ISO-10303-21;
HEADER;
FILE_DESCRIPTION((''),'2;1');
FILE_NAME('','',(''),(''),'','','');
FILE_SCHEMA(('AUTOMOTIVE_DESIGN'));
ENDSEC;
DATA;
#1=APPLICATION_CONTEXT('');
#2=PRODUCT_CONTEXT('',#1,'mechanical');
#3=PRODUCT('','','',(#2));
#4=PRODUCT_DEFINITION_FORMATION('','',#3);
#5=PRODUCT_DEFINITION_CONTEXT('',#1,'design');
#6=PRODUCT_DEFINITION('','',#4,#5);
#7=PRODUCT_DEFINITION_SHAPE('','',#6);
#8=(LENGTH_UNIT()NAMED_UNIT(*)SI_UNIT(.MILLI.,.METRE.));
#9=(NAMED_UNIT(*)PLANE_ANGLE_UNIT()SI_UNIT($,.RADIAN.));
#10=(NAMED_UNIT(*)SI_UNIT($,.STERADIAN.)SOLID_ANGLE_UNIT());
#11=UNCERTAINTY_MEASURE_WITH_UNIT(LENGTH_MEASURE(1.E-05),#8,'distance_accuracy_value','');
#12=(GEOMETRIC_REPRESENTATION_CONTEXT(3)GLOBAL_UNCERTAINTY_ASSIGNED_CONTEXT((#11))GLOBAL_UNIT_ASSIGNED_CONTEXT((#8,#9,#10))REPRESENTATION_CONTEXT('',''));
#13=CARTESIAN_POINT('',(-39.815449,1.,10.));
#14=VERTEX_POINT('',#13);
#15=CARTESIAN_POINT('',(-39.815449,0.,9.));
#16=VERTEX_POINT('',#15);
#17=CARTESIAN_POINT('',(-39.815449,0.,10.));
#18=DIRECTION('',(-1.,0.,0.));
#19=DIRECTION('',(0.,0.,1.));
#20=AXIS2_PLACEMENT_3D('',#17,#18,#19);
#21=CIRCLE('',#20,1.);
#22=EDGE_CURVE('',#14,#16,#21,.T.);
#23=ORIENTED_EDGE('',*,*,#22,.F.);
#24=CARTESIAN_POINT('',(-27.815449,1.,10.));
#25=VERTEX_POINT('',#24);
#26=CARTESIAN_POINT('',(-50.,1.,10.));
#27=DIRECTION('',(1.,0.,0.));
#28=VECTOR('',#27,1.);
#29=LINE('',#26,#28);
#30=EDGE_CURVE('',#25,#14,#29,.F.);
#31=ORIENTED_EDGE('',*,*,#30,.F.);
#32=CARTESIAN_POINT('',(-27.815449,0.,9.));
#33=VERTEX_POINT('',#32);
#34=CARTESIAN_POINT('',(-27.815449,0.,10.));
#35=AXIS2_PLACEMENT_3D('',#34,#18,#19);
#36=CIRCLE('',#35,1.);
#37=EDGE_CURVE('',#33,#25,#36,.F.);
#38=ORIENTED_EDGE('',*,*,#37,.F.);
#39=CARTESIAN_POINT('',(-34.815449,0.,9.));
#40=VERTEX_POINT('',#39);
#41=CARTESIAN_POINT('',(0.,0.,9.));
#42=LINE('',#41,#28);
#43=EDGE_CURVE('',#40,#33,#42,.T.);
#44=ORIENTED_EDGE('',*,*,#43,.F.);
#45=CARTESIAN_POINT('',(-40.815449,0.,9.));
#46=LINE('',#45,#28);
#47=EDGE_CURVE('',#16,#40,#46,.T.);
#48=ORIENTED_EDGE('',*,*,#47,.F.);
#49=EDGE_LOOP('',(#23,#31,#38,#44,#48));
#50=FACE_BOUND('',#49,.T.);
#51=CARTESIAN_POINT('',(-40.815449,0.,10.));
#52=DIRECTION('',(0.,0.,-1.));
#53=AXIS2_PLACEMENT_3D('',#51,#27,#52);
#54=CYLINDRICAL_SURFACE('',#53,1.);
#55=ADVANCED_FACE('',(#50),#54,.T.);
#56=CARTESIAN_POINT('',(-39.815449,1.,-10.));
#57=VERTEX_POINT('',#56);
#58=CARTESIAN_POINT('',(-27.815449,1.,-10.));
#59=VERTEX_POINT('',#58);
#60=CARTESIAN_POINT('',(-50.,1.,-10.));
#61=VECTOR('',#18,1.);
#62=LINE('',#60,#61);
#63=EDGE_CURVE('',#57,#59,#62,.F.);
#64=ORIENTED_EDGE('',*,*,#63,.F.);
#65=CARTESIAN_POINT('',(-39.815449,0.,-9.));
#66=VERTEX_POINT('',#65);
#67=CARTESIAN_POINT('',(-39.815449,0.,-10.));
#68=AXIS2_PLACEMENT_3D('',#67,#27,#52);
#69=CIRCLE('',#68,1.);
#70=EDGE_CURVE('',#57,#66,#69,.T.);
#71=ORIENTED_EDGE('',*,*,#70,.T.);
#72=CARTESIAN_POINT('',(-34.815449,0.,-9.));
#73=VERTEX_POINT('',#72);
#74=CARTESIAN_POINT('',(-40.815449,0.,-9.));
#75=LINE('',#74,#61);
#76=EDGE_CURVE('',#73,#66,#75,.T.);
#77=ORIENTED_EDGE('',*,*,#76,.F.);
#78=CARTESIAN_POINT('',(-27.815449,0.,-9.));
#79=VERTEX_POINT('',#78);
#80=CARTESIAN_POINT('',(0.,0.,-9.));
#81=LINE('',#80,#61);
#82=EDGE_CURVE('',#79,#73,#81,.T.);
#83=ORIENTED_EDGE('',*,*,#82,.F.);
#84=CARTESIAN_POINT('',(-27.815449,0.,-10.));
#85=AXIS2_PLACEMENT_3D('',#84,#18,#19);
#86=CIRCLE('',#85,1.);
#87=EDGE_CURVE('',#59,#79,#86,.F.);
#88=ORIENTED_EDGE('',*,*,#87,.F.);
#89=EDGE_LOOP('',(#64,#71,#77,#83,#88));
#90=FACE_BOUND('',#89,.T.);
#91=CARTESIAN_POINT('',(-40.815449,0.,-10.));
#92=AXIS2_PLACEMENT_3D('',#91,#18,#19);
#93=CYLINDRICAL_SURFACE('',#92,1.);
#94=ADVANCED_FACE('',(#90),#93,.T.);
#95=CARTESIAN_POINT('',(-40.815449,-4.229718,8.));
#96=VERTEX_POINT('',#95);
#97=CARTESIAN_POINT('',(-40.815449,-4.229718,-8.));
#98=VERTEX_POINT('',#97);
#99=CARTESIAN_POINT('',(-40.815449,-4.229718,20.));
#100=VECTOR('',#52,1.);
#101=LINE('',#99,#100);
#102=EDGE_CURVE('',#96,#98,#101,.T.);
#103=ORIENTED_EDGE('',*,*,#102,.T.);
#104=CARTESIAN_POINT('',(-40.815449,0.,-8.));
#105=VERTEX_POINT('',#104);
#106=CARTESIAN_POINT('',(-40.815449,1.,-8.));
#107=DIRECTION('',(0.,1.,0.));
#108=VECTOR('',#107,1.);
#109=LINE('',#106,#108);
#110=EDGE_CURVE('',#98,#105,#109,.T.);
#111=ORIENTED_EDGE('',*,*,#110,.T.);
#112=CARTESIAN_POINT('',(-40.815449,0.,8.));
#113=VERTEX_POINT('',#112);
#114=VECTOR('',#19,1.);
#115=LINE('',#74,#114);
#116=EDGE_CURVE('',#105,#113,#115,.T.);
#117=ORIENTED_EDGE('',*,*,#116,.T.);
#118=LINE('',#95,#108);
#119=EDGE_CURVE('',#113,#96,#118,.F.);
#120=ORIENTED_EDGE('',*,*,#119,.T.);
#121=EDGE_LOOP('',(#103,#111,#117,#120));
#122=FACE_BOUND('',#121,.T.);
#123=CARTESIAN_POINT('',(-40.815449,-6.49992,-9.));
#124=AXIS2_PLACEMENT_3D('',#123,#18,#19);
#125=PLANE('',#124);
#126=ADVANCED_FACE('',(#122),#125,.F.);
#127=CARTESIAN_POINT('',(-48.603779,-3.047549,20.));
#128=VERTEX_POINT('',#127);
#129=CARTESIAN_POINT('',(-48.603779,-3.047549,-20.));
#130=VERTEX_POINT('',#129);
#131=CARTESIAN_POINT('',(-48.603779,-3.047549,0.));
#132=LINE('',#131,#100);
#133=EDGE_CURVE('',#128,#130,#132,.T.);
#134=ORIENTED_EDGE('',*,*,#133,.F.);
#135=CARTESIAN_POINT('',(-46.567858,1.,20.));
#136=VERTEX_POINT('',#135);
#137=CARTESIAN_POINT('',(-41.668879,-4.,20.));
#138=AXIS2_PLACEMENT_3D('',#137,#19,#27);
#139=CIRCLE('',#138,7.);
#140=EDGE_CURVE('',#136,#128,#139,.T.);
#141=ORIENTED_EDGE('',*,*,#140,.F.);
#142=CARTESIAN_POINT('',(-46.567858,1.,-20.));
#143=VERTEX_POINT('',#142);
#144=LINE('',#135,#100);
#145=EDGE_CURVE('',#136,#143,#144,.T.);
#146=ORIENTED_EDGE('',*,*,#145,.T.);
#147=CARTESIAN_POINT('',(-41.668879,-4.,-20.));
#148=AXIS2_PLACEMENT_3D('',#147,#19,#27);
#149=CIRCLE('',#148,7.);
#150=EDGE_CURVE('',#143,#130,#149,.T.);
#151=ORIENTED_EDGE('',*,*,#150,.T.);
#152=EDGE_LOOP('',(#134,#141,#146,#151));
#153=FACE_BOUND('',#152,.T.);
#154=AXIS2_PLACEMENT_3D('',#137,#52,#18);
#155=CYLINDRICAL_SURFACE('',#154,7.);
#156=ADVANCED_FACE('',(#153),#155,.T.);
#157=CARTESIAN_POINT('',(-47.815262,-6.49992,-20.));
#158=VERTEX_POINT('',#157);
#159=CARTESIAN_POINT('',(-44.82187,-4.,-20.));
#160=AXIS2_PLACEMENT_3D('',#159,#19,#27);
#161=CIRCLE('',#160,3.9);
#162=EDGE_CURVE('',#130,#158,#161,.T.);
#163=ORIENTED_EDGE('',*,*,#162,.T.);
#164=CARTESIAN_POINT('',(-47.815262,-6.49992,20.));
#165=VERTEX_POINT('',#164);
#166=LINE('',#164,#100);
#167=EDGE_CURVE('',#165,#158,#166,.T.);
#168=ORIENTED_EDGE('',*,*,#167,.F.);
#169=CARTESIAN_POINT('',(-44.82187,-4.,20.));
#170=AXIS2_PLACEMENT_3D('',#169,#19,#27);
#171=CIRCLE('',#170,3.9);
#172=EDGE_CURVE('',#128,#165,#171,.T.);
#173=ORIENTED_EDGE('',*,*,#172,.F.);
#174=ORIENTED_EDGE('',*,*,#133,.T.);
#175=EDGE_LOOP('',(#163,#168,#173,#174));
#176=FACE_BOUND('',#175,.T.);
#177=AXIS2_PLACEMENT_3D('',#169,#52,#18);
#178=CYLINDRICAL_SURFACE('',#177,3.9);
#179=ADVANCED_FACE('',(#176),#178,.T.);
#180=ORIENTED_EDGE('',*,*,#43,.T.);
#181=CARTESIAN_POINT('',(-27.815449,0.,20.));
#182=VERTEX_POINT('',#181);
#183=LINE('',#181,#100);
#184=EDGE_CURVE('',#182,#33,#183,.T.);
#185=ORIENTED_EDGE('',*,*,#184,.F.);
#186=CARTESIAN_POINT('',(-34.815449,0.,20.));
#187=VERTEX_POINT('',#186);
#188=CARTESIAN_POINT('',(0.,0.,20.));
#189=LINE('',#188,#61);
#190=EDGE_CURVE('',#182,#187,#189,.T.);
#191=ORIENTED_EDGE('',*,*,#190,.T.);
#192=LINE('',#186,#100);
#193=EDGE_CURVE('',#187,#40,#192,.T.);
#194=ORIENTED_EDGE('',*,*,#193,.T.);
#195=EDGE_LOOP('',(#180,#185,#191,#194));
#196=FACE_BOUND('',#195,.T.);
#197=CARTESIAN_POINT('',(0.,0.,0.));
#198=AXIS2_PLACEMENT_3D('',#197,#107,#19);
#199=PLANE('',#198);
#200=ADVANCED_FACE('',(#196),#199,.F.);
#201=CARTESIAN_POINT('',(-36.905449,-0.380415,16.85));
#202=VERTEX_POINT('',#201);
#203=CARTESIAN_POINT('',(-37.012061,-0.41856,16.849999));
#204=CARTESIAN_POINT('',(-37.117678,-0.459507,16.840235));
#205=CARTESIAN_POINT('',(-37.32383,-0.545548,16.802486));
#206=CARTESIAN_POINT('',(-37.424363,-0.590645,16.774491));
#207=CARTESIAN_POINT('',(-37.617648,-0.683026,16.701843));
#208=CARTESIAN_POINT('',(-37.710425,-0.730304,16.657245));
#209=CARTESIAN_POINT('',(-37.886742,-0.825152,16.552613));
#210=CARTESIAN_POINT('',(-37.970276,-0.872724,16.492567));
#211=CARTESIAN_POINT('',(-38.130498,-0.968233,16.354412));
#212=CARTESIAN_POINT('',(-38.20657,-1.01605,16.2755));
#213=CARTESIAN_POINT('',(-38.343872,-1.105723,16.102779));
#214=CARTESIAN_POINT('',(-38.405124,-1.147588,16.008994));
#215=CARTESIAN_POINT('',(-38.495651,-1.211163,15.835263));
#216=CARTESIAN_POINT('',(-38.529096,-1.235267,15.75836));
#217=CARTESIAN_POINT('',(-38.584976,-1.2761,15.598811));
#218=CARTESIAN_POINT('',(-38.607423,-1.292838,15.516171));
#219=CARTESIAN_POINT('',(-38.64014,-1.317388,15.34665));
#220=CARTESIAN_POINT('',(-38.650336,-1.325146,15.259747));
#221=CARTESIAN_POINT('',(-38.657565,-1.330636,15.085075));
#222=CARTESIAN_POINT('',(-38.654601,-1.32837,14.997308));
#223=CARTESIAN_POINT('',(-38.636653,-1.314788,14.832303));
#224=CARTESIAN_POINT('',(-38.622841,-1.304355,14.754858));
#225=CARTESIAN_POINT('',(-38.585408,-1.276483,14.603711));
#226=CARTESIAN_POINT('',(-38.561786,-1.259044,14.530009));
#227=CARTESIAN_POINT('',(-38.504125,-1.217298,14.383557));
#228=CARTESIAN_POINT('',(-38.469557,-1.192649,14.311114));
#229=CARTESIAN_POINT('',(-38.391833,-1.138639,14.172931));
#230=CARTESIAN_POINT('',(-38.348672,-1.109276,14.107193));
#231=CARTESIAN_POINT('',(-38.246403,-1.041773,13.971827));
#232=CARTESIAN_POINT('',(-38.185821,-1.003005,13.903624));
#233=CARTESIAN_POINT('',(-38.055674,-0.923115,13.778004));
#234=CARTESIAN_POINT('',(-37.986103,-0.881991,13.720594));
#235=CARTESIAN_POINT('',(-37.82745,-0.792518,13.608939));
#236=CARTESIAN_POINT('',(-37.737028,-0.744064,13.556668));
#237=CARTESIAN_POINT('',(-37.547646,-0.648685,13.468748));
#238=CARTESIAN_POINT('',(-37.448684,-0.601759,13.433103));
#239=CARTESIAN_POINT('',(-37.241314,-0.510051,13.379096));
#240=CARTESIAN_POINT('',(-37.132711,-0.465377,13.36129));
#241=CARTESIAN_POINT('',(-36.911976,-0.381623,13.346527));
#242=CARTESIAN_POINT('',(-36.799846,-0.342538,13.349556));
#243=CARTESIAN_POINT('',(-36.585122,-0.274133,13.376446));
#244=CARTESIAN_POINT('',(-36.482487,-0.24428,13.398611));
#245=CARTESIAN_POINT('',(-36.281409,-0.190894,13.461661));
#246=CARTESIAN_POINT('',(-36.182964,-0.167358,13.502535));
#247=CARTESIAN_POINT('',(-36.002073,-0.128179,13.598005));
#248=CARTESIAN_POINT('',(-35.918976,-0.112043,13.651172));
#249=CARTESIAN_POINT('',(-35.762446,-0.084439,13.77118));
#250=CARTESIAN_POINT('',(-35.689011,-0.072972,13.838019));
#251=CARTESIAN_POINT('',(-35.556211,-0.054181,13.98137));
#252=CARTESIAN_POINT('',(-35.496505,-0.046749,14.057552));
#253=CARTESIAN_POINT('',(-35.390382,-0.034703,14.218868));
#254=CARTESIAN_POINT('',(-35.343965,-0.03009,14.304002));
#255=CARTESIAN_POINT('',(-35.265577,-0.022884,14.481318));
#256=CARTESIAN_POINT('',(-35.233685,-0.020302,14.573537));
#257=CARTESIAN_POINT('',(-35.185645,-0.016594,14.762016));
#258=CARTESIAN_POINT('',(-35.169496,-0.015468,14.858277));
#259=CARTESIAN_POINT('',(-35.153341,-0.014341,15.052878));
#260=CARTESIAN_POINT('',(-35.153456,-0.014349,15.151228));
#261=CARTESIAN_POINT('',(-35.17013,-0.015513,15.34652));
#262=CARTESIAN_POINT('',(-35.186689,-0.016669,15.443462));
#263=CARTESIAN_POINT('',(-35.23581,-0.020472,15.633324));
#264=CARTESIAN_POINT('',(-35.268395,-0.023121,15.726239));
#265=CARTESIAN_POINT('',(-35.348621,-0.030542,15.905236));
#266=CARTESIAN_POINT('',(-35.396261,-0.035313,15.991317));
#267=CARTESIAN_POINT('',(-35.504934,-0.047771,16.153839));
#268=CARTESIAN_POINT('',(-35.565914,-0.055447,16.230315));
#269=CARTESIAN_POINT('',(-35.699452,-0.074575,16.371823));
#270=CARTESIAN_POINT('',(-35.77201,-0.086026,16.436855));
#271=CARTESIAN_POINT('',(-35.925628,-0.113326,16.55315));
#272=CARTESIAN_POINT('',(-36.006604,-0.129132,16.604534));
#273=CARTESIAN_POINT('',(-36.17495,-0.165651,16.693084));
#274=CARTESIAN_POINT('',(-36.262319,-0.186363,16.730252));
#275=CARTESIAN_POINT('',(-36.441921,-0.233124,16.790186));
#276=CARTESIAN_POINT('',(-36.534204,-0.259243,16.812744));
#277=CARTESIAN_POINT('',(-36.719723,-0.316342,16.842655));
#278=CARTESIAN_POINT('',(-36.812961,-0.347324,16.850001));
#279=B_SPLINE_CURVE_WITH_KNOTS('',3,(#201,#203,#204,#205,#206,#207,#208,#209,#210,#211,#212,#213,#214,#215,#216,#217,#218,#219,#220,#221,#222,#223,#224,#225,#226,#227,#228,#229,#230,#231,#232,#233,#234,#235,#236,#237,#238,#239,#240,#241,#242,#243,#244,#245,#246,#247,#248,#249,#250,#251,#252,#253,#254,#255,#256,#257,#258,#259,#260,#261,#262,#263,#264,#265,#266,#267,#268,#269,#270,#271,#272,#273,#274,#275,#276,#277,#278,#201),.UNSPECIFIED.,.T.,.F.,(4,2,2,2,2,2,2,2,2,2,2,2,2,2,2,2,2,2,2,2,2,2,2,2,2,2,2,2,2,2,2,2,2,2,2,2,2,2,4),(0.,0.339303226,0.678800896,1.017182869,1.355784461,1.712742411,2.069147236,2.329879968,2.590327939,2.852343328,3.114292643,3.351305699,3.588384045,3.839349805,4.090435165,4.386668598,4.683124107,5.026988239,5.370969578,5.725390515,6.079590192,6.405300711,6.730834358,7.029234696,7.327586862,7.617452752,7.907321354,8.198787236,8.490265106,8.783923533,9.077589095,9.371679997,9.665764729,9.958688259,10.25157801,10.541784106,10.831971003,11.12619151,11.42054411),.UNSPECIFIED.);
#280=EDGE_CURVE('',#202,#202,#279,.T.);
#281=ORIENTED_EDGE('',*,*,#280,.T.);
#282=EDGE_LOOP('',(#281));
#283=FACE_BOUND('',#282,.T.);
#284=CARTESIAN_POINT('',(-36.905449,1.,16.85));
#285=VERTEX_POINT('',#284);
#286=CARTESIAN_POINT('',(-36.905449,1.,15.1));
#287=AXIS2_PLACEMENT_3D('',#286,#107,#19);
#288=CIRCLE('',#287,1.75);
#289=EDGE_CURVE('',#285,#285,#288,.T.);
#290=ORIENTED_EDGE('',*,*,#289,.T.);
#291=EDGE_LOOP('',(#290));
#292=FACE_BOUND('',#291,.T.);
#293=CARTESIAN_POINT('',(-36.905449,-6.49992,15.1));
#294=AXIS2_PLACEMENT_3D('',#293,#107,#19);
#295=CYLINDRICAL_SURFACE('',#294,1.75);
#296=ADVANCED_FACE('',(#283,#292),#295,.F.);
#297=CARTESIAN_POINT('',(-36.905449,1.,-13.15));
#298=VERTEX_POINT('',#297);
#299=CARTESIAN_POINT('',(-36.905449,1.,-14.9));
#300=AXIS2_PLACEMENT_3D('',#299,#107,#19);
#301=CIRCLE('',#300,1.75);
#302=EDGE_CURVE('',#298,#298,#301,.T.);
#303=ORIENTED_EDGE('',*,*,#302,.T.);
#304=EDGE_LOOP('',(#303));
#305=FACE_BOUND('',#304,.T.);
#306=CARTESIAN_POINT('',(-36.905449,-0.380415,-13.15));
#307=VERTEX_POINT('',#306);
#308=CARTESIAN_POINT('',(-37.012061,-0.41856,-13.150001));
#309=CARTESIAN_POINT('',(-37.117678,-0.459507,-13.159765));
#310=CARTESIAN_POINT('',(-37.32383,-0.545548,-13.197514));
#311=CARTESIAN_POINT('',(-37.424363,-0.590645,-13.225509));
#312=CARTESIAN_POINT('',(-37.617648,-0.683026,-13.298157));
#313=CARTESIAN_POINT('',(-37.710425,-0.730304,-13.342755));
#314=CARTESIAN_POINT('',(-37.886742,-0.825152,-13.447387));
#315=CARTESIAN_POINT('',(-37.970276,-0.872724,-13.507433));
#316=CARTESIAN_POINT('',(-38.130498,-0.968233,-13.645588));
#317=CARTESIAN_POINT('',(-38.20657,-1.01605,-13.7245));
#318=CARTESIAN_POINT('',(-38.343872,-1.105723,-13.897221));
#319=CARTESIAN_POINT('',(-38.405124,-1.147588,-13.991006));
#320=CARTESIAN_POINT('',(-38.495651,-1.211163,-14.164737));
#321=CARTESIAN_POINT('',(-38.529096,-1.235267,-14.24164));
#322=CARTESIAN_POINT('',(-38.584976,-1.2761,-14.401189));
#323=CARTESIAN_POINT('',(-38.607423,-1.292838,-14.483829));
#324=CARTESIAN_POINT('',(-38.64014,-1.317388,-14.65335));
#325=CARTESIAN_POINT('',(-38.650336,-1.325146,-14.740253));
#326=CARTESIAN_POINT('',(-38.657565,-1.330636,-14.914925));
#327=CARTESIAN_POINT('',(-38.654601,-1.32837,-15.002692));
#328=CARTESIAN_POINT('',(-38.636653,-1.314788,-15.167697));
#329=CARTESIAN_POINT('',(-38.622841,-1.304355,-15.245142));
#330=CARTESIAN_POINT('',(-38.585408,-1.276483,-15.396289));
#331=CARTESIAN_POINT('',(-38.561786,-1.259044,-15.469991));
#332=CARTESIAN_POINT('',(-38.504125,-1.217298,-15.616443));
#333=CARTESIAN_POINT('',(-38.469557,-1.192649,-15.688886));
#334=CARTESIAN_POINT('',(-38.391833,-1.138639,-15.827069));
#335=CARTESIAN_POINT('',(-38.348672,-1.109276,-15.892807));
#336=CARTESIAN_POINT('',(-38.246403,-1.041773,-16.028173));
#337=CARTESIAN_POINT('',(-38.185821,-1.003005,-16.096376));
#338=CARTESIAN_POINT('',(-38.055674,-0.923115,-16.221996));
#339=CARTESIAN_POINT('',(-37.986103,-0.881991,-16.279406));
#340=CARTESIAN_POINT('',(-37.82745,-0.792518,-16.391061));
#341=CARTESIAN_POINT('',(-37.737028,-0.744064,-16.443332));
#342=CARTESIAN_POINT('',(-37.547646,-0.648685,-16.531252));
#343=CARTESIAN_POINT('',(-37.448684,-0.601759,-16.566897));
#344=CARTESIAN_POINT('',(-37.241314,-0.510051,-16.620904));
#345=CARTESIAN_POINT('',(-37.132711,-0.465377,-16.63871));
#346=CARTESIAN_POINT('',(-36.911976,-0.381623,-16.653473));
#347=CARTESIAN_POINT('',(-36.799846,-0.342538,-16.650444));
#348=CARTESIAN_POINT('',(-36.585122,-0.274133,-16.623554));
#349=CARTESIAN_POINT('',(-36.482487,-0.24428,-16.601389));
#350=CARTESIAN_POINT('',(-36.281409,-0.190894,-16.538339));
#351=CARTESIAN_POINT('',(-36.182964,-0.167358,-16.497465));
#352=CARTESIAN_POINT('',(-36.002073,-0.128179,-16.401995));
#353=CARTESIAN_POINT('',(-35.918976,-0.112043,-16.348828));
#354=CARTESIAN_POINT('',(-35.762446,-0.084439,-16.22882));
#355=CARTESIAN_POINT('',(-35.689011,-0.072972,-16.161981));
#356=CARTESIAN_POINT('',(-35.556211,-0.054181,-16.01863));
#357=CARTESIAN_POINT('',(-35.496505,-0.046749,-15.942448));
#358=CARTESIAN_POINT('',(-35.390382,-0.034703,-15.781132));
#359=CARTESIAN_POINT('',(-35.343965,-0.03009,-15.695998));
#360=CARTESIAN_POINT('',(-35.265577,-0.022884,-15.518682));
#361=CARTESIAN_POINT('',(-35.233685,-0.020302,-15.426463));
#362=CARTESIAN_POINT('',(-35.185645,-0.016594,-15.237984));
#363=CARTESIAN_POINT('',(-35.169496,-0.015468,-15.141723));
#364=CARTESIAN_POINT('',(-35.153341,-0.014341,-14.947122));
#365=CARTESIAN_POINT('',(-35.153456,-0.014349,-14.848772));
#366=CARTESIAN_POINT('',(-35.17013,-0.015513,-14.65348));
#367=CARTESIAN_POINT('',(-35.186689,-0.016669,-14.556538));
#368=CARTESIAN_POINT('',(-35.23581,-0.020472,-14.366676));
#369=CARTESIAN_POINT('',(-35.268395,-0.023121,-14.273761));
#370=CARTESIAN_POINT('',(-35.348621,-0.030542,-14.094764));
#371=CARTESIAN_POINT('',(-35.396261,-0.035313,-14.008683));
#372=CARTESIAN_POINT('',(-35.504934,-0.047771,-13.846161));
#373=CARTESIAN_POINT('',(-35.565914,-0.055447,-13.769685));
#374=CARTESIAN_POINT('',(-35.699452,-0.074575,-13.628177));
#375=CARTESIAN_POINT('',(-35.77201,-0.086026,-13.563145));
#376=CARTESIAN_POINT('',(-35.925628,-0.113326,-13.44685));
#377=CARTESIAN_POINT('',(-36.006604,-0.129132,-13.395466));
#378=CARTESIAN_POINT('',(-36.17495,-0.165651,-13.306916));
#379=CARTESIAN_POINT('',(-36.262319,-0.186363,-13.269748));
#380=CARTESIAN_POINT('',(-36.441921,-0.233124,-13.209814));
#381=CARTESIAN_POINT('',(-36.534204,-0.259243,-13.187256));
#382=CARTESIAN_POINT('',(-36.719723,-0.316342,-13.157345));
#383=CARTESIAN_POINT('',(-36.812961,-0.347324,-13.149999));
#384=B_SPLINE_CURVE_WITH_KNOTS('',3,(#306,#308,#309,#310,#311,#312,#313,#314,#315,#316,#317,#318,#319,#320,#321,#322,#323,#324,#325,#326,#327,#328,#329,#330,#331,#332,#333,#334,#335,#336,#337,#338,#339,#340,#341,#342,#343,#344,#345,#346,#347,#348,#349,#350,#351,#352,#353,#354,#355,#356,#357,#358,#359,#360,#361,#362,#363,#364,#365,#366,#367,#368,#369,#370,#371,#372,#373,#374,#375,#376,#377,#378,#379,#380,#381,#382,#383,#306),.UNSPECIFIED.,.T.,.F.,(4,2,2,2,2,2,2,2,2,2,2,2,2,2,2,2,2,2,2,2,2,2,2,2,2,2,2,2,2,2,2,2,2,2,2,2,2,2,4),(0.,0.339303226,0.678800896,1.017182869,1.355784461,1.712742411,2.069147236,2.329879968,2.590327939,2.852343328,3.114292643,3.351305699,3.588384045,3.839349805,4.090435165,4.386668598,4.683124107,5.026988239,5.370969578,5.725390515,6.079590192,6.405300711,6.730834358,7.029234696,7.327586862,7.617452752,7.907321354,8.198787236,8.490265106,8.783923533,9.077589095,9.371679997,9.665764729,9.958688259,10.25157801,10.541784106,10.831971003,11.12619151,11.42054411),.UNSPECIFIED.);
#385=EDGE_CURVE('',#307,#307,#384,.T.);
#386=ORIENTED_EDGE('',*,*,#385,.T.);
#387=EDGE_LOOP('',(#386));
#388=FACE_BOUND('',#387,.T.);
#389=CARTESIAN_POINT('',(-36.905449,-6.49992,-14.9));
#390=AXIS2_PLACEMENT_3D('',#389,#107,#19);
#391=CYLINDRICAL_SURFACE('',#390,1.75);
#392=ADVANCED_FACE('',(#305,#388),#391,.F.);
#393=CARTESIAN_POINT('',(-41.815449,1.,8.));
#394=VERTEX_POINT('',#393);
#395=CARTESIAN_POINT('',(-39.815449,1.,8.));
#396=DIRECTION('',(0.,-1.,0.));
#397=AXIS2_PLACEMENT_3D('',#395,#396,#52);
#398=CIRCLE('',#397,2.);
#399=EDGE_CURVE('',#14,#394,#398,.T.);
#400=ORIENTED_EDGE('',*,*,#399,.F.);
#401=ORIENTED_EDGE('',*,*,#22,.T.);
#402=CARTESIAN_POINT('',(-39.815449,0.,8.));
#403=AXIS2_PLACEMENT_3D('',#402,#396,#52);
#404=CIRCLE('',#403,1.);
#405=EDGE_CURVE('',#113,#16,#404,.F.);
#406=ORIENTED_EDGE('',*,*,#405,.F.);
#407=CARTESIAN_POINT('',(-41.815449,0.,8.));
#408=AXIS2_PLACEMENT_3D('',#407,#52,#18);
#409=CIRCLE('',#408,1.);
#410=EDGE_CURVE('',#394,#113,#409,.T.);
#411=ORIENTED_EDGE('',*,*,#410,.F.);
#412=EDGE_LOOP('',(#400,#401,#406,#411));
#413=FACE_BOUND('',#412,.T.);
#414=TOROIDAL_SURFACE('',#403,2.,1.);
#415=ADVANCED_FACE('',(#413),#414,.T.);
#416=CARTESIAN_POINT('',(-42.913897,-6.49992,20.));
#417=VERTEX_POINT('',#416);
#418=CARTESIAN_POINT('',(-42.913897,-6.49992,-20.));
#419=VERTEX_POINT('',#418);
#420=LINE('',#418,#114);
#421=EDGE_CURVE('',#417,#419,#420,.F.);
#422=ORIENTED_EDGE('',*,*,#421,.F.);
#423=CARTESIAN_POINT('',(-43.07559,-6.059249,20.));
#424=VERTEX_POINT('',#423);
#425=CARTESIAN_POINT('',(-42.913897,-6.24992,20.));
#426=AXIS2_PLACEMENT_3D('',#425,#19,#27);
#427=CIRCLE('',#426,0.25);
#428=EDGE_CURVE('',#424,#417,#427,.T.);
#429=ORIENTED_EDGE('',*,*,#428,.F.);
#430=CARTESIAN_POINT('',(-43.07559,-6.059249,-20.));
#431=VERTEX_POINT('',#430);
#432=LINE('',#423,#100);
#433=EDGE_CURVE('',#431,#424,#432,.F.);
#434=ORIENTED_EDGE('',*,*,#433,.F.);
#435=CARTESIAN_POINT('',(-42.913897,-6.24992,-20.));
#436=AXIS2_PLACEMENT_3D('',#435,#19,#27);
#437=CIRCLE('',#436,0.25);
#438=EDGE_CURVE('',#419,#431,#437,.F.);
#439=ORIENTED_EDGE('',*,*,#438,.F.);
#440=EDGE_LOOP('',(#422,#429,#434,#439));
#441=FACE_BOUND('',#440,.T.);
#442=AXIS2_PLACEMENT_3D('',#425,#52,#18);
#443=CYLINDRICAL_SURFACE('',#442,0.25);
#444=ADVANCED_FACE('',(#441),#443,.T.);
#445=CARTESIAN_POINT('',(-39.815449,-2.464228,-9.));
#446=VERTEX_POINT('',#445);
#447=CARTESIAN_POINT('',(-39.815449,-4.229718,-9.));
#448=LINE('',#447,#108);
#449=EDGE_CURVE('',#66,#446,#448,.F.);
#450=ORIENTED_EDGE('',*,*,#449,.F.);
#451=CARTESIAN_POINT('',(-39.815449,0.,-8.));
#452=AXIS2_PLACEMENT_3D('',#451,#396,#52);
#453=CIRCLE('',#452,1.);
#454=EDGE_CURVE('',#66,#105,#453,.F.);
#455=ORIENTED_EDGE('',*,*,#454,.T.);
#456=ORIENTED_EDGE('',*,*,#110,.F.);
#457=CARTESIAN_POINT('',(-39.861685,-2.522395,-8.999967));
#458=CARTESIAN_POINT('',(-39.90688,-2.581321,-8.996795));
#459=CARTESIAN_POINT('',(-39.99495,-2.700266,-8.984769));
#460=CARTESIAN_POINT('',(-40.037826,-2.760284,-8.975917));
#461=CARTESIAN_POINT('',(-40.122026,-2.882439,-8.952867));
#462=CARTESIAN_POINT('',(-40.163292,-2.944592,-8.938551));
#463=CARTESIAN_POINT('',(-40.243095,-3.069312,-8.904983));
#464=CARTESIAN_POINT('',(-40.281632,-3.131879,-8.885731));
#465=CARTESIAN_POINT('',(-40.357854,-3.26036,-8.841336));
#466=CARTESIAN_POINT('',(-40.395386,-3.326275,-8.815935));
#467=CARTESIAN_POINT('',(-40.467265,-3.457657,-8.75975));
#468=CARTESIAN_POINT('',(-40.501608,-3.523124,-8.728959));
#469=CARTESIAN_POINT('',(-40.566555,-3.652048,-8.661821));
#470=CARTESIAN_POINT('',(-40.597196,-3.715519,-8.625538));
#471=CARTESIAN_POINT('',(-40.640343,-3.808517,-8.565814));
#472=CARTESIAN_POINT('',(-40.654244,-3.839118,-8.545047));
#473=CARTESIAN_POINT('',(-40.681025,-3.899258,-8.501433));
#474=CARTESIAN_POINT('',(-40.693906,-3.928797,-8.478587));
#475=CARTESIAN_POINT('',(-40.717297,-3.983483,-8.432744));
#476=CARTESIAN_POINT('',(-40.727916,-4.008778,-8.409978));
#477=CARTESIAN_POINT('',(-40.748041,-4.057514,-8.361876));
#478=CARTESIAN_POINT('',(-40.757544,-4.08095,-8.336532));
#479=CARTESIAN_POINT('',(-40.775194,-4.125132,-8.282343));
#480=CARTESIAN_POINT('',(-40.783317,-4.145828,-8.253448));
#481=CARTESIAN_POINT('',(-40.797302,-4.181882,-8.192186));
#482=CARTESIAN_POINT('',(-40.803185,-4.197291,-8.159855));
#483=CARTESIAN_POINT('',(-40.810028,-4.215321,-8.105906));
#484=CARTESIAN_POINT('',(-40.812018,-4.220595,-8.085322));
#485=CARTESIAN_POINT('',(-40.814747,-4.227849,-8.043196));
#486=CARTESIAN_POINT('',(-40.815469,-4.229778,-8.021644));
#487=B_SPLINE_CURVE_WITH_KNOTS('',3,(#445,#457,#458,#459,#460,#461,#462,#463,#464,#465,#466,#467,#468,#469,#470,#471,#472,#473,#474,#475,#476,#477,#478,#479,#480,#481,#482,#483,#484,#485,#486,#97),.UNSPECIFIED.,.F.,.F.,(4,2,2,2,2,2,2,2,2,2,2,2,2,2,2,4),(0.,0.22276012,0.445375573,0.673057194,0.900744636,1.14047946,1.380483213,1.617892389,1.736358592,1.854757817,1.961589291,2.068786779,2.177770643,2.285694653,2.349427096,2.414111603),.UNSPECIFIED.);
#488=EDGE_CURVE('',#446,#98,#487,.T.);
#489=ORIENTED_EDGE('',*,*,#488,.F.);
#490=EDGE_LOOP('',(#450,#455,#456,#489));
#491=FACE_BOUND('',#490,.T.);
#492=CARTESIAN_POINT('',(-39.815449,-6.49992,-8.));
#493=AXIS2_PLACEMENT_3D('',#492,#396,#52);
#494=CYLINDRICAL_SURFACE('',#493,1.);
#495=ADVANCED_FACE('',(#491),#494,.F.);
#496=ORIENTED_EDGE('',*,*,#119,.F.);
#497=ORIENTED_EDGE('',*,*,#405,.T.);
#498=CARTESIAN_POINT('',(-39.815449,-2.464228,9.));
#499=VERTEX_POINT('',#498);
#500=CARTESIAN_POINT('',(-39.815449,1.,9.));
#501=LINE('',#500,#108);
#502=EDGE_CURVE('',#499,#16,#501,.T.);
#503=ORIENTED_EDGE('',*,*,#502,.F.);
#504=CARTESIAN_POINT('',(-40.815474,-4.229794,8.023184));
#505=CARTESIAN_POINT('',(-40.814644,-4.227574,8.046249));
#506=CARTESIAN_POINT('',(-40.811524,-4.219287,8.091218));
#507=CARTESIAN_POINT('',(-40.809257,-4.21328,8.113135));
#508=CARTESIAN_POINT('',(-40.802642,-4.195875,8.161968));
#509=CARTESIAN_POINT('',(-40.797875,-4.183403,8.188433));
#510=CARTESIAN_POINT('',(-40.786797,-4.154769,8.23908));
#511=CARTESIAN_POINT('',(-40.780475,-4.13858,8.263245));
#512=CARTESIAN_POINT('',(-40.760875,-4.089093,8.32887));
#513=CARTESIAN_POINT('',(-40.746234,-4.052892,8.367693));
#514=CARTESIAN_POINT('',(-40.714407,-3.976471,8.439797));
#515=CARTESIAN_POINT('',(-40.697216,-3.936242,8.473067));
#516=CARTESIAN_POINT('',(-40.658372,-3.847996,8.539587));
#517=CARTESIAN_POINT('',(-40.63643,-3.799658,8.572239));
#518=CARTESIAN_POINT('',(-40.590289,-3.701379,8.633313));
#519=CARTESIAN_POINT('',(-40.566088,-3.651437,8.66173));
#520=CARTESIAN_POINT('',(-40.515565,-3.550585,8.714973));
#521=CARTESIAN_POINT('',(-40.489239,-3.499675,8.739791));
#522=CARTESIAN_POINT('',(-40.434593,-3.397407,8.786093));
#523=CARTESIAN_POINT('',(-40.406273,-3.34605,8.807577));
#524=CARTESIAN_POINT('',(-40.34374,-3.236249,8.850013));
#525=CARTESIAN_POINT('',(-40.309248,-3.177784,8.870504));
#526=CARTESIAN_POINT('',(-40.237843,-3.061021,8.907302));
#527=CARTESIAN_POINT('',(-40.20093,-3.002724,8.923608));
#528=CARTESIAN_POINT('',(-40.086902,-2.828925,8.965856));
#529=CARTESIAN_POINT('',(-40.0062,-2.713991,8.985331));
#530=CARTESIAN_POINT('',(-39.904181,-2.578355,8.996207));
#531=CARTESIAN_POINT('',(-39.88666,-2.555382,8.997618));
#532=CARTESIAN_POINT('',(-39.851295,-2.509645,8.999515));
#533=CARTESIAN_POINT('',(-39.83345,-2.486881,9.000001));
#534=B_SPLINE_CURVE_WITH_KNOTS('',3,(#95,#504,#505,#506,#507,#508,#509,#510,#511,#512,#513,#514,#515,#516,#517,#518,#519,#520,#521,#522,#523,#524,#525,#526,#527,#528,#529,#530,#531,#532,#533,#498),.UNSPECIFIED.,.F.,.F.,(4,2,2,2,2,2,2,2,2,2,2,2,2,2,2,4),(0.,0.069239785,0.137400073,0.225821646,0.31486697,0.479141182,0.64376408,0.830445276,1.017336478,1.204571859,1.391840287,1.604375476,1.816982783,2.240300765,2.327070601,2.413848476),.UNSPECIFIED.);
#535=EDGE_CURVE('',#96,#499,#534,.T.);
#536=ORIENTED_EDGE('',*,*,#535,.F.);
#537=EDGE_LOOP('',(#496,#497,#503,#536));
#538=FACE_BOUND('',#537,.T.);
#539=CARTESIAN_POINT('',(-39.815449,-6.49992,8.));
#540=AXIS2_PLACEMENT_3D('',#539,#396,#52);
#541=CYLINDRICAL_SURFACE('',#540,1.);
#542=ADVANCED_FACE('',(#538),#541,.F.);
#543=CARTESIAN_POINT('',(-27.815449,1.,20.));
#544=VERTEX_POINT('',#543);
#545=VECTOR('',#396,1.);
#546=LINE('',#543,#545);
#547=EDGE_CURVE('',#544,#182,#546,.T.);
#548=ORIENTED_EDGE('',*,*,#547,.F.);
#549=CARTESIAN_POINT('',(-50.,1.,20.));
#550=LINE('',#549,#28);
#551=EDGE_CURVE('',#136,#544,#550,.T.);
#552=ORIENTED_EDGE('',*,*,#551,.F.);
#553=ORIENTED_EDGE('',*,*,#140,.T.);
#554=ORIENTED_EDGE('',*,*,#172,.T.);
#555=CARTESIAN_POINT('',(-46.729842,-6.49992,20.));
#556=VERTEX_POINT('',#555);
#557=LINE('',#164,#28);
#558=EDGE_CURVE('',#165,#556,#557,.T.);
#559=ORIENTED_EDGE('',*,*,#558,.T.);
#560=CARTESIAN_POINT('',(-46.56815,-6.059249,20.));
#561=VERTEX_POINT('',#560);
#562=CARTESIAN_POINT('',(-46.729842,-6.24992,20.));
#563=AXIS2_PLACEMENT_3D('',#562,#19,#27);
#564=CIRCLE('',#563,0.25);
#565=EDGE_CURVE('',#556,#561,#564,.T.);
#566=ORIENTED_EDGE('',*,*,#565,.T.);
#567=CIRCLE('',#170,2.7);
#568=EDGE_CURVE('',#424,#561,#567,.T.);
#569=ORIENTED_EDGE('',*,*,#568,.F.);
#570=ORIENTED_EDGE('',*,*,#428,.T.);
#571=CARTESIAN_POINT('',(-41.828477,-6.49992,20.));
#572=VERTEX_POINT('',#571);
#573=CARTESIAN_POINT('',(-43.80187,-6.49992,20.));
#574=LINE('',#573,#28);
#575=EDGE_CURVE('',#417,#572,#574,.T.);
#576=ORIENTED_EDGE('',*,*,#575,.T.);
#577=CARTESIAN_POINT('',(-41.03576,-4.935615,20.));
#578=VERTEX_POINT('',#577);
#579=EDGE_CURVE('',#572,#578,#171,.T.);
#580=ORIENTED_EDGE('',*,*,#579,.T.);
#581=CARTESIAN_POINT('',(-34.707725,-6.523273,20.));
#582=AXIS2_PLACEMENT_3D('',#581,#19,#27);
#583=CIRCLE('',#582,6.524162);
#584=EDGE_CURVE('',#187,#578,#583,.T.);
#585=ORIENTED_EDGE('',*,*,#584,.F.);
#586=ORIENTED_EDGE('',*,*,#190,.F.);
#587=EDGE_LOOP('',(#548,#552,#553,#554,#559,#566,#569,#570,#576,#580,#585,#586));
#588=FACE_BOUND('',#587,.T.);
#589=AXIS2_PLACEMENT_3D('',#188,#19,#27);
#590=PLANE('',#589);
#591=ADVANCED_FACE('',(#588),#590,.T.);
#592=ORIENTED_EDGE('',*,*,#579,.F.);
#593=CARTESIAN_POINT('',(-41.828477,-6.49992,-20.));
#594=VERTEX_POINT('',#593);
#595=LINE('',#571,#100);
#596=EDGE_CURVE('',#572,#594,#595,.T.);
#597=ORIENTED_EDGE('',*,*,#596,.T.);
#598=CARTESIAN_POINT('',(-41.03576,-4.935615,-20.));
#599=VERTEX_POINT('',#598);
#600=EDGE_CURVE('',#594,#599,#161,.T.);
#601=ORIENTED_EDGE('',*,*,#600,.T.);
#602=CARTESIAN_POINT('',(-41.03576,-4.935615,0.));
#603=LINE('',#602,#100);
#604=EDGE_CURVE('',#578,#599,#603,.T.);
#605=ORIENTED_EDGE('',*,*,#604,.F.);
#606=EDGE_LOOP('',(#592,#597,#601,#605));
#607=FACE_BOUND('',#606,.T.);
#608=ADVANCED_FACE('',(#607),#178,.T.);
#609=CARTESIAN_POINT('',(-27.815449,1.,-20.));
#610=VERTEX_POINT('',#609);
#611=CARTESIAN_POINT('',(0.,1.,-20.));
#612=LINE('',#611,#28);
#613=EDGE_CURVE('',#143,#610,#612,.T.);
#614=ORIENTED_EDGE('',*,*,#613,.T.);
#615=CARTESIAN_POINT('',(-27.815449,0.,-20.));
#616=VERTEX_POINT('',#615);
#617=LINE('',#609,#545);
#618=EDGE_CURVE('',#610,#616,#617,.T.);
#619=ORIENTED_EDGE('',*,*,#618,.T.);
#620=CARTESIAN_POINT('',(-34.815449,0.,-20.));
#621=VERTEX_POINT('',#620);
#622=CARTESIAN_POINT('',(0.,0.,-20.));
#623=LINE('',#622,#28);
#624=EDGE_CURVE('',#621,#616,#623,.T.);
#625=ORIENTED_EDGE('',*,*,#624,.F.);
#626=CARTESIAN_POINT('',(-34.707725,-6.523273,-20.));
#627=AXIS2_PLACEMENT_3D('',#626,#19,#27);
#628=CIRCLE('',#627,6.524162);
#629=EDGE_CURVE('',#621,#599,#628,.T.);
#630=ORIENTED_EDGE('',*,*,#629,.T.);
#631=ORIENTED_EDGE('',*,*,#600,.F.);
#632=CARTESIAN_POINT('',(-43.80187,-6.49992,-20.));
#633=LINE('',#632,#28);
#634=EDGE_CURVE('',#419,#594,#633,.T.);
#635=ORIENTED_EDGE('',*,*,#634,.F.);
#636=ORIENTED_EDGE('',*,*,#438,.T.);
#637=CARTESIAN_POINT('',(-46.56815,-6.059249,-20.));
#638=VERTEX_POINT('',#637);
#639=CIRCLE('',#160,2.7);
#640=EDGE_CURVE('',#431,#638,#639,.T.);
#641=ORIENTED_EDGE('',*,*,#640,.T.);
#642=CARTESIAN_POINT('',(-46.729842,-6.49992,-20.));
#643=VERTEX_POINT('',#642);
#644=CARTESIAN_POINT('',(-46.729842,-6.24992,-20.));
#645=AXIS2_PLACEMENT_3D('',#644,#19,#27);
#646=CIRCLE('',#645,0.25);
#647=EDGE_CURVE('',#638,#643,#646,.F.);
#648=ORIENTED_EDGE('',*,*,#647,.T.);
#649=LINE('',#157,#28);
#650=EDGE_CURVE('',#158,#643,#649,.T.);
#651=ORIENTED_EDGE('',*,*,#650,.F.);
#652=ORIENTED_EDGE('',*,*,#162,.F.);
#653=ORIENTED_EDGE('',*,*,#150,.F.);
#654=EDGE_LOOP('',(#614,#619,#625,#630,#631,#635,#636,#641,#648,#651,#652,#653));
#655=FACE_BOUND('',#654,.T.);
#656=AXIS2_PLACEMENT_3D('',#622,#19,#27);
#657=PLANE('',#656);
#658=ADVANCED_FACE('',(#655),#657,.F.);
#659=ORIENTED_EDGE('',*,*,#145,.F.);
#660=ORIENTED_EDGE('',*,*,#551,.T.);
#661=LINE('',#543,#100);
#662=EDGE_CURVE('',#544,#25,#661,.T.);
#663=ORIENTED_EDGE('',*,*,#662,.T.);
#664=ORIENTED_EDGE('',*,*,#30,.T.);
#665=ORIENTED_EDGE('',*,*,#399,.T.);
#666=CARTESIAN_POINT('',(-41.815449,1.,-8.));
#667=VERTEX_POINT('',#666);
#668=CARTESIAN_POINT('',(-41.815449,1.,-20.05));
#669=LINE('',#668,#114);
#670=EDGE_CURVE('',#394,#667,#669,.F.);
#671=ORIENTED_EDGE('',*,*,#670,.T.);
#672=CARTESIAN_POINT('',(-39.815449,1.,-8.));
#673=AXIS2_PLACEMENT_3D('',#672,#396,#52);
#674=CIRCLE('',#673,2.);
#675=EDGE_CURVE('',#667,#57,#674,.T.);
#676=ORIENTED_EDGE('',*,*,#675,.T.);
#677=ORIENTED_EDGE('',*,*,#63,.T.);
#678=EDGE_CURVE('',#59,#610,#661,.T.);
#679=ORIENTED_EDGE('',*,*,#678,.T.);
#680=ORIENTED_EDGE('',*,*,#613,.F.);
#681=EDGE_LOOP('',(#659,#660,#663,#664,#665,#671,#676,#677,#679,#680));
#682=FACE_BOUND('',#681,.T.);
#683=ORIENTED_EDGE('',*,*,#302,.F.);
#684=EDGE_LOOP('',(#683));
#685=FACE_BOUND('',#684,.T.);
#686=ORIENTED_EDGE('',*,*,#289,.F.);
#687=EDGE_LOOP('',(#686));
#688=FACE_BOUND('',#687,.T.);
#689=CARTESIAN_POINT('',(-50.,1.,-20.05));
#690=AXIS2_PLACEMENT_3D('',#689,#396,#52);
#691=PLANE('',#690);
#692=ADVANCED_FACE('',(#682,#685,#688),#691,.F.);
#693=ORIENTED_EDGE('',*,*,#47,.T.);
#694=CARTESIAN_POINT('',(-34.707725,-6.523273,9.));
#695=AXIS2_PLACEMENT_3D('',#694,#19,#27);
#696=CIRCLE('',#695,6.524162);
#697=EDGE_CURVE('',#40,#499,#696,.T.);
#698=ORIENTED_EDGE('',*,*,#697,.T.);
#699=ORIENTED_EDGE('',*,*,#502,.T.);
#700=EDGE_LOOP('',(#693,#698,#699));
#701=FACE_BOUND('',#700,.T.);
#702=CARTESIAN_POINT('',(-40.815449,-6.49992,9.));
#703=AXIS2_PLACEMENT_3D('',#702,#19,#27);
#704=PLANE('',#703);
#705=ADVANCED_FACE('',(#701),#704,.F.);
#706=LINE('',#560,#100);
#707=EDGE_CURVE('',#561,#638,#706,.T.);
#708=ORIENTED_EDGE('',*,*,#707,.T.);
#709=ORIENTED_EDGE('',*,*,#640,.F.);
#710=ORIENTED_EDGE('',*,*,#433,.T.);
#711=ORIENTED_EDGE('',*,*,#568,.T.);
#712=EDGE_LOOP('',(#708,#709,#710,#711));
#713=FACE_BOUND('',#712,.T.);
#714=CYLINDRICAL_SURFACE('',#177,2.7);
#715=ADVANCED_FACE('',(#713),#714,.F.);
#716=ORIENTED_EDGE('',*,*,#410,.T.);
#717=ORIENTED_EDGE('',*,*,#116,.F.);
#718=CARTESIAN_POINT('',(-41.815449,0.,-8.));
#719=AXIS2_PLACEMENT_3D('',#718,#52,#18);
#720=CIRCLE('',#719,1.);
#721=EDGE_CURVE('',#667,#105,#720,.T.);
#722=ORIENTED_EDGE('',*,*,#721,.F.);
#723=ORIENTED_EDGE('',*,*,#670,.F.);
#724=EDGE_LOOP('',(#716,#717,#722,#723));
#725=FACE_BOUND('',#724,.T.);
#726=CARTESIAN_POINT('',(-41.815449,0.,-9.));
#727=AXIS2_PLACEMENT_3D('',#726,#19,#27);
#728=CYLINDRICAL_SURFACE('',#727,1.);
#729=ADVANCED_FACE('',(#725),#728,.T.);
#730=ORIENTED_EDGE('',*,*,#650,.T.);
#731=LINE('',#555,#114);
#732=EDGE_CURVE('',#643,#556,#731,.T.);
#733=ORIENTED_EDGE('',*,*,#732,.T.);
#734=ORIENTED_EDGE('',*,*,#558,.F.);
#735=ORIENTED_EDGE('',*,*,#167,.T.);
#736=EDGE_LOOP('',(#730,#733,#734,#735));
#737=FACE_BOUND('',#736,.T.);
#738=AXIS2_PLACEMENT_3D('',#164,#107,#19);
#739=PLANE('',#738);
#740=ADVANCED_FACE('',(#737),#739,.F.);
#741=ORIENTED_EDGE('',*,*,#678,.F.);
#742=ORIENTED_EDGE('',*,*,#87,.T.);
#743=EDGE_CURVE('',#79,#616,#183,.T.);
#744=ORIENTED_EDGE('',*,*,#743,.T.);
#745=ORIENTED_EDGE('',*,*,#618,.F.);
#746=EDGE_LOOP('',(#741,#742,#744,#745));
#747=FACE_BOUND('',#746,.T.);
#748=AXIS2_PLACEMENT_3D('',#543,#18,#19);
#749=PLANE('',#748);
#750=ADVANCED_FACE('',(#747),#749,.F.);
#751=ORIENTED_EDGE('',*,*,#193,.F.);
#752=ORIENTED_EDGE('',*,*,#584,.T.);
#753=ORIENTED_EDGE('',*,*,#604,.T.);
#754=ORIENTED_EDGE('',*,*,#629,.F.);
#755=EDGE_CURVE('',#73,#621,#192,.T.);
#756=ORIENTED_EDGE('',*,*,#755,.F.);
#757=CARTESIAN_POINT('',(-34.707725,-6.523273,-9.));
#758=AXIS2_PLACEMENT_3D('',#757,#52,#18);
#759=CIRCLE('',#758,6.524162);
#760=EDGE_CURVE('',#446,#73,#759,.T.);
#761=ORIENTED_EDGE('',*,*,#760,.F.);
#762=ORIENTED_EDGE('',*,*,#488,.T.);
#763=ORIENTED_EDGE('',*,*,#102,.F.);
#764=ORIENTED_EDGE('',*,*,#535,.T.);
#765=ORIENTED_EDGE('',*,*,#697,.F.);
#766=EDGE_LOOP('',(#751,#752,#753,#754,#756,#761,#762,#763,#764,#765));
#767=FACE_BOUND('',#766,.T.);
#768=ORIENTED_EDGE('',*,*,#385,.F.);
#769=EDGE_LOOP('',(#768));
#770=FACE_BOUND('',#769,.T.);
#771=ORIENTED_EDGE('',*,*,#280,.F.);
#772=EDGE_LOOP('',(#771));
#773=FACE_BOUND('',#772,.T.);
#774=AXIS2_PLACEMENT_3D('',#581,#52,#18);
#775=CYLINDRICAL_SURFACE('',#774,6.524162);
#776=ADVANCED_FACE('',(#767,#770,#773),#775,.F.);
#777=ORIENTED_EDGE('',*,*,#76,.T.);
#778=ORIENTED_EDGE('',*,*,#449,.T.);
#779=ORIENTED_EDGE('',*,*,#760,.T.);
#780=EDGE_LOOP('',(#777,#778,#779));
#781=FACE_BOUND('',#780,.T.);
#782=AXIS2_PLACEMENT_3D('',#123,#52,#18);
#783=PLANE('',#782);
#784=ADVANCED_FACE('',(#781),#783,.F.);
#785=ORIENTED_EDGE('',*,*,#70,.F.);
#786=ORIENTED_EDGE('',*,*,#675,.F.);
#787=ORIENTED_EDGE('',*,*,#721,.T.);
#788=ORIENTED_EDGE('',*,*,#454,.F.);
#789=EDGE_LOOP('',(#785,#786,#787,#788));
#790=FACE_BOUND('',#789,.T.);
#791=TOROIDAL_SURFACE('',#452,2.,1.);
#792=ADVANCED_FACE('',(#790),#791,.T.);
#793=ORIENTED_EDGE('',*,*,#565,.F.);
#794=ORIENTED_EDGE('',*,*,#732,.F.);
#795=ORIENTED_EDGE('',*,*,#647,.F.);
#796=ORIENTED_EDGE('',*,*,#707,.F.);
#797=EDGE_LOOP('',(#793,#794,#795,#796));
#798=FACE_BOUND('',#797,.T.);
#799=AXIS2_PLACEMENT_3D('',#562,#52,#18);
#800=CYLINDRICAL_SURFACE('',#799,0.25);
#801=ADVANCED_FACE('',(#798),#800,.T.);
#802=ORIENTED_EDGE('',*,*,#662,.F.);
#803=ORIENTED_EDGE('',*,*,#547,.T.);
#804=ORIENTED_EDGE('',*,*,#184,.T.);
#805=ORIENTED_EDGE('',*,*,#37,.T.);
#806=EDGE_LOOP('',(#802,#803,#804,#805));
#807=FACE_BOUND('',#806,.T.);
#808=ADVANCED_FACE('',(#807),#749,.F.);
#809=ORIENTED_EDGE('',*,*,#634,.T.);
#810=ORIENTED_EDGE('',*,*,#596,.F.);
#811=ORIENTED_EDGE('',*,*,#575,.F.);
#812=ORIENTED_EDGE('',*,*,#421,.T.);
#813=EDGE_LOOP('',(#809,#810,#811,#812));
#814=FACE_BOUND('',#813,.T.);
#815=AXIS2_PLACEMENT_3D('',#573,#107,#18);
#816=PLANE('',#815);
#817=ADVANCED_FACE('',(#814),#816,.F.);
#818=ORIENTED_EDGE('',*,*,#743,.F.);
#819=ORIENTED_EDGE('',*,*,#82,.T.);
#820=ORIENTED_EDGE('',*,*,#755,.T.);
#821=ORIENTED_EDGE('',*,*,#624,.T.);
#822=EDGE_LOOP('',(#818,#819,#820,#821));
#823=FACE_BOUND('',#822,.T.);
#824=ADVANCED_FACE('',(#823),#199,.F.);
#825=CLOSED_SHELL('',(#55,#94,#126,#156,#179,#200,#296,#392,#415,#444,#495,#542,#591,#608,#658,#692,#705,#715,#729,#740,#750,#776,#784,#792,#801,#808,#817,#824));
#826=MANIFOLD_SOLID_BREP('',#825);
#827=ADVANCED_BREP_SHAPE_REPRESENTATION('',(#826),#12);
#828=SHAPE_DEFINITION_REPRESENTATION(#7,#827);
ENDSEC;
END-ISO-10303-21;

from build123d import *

# Parameters (mm, degrees)
EXTRUDE_1_DEPTH                            = 3.9
EXTRUDE_3_DEPTH                            = 20
EXTRUDE_5_DEPTH                            = 20
FILLET_1_R                                 = 0.25
FILLET_1_OF_MIRROR_2_R                     = 0.25
SKETCH_7_R                                 = 5.5
CUT_EXTRUDE_3_DEPTH                        = 69.146236458
MIRROR_3_AT_THE_SECOND_PLANE_COPY_1_SKET_R = 5.5
MIRROR_3_AT_THE_SECOND_PLANE_COPY_1_DEPTH  = 69.146236458
ESQUISSE1_W                                = 44.6
ESQUISSE1_H                                = 40
ENL_V_MAT_EXTRU_1_DEPTH                    = 1.54
ENL_V_MAT_EXTRU_2_DEPTH                    = 57.761068742
ESQUISSE3_W                                = 50
ESQUISSE3_H                                = 1.36
ENL_V_MAT_EXTRU_3_DEPTH                    = 64.372466761
ESQUISSE4_W                                = 27.815449133
ESQUISSE4_H                                = 40
ENL_V_MAT_EXTRU_4_DEPTH                    = 54.066651895
ESQUISSE5_R                                = 1.75
ENL_V_MAT_EXTRU_5_DEPTH                    = 54.198396436
ESQUISSE6_W                                = 13
ESQUISSE6_H                                = 18
ENL_V_MAT_EXTRU_6_DEPTH                    = 54.198396473
CONG_1_R                                   = 1
CONG_2_R                                   = 1


with BuildPart() as part:
    # Эскиз1 → Бобышка-Вытянуть1 (new body)
    with BuildSketch(Plane(origin=(0, 0, 0), x_dir=(1, 0, 0), z_dir=(0, 1, 0))):
        with BuildLine():
            ThreePointArc((-44.6, -23.2), (-43.428427125, -26.028427125), (-40.6, -27.2))
            Line((-40.6, -27.2), (40.6, -27.2))
            ThreePointArc((40.6, -27.2), (43.428427125, -26.028427125), (44.6, -23.2))
            Line((44.6, -23.2), (44.6, 23.2))
            ThreePointArc((44.6, 23.2), (43.428427125, 26.028427125), (40.6, 27.2))
            Line((40.6, 27.2), (33.6, 27.2))
            Line((33.6, 27.2), (-5.4, 27.2))
            Line((-5.4, 27.2), (-40.6, 27.2))
            ThreePointArc((-40.6, 27.2), (-43.428427125, 26.028427125), (-44.6, 23.2))
            Line((-44.6, 23.2), (-44.6, -23.2))
        make_face()
    extrude(amount=EXTRUDE_1_DEPTH)



with BuildPart() as body_2:
    # Эскиз3 → Бобышка-Вытянуть3 (new, symmetric)
    with BuildSketch(Plane.XY):
        with BuildLine():
            Line((-47.815262386, -6.499919999), (-45.841869662, -6.499919999))
            ThreePointArc((-45.841869662, -6.499919999), (-44.821869662, -1.3), (-43.801869662, -6.499919999))
            Line((-43.801869662, -6.499919999), (-41.828476938, -6.499919999))
            ThreePointArc((-41.828476938, -6.499919999), (-44.821869662, -0.1), (-47.815262386, -6.499919999))
        make_face()
    extrude_3 = extrude(amount=EXTRUDE_3_DEPTH, both=True)


with BuildPart() as part_1:
    add(part.part)

    add(body_2.part)  # Бобышка-Вытянуть5 merges body 2
    # Эскиз5 → Бобышка-Вытянуть5 (add, symmetric)
    with BuildSketch(Plane.XY):
        with BuildLine():
            ThreePointArc((-41.631827579, 2.999901942), (-46.932438451, 0.61464415), (-48.60377877, -4.952451312))
            Line((-48.60377877, -4.952451312), (-47.348297278, -4.952451312))
            ThreePointArc((-47.348297278, -4.952451312), (-44.821869662, -1.3), (-42.295442046, -4.952451312))
            Line((-42.295442046, -4.952451312), (-41.039960555, -4.952451312))
            ThreePointArc((-41.039960555, -4.952451312), (-38.684888017, -1.351535806), (-34.6, 0))
            Line((-34.6, 0), (-36.641600827, 0.870983001))
            ThreePointArc((-36.641600827, 0.870983001), (-38.922074934, 2.438561027), (-41.631827579, 2.999901942))
        make_face()
    extrude_5 = extrude(amount=EXTRUDE_5_DEPTH, both=True)

    # Скругление1
    fillet_1_edges = [part_1.edges().sort_by_distance(p)[0] for p in [
        (-43.801869662, -6.499919999, 0),
        (-45.841869662, -6.499919999, 0),
    ]]
    fillet(fillet_1_edges, radius=FILLET_1_R)

    # Зеркальное отражение1: Бобышка-Вытянуть5 across plane
    add(extrude_5.mirror(Plane(origin=(0, 0, 0), x_dir=(0, 0, 1), z_dir=(1, 0, 0))))

    # Зеркальное отражение2: Бобышка-Вытянуть3 across plane
    add(extrude_3.mirror(Plane(origin=(0, 0, 0), x_dir=(0, 0, 1), z_dir=(1, 0, 0))))

    # Скругление1 of Зеркальное отражение2
    fillet_1_of_mirror_2_edges = [part_1.edges().sort_by_distance(p)[0] for p in [
        (43.801869662, -6.499919999, 0),
        (45.841869662, -6.499919999, 0),
    ]]
    fillet(fillet_1_of_mirror_2_edges, radius=FILLET_1_OF_MIRROR_2_R)

    # Эскиз7 → Вырез-Вытянуть3 (cut, through all)
    with BuildSketch(Plane.XY.offset(20)):
        with Locations((-45, -4)):
            Circle(SKETCH_7_R)
    cut_extrude_3 = extrude(amount=CUT_EXTRUDE_3_DEPTH, mode=Mode.SUBTRACT)

    # Зеркальное отражение3: Вырез-Вытянуть3 across plane
    add(cut_extrude_3.mirror(Plane(origin=(0, 0, 0), x_dir=(0, 0, 1), z_dir=(1, 0, 0))), mode=Mode.SUBTRACT)

    # Зеркальное отражение3 at the second plane: Вырез-Вытянуть3 across plane
    add(cut_extrude_3.mirror(Plane.XY), mode=Mode.SUBTRACT)

    # Зеркальное отражение3 at the second plane copy 1 sket → Зеркальное отражение3 at the second plane copy 1 (cut, through all)
    with BuildSketch(Plane(origin=(0, 0, -20), x_dir=(-1, 0, 0), z_dir=(0, 0, -1))):
        with Locations((-45, -4)):
            Circle(MIRROR_3_AT_THE_SECOND_PLANE_COPY_1_SKET_R)
    extrude(amount=MIRROR_3_AT_THE_SECOND_PLANE_COPY_1_DEPTH, mode=Mode.SUBTRACT)

    # Esquisse1 → Enlèv. mat.-Extru.1 (cut)
    with BuildSketch(Plane(origin=(0, 3.9, 0), x_dir=(1, 0, 0), z_dir=(0, 1, 0))):
        with Locations((-22.3, 0)):
            Rectangle(ESQUISSE1_W, ESQUISSE1_H)
    extrude(amount=-ENL_V_MAT_EXTRU_1_DEPTH, mode=Mode.SUBTRACT)

    # Esquisse2 → Enlèv. mat.-Extru.2 (cut, through all)
    with BuildSketch(Plane(origin=(0, 3.9, 0), x_dir=(1, 0, 0), z_dir=(0, 1, 0))):
        Polygon((-44.6, 20), (-44.6, 27.2), (51.6, 27.2), (51.6, -27.2), (-44.6, -27.2), (-44.6, -20), (0, -20), (0, 20), align=None)
    extrude(amount=-ENL_V_MAT_EXTRU_2_DEPTH, mode=Mode.SUBTRACT)

    # Esquisse3 → Enlèv. mat.-Extru.3 (cut, through all)
    with BuildSketch(Plane.XY.offset(20)):
        with Locations((-25, 1.68)):
            Rectangle(ESQUISSE3_W, ESQUISSE3_H)
    extrude(amount=-ENL_V_MAT_EXTRU_3_DEPTH, mode=Mode.SUBTRACT)

    # Esquisse4 → Enlèv. mat.-Extru.4 (cut, through all)
    with BuildSketch(Plane.XZ):
        with Locations((-13.907724567, 0)):
            Rectangle(ESQUISSE4_W, ESQUISSE4_H)
    extrude(amount=-ENL_V_MAT_EXTRU_4_DEPTH, mode=Mode.SUBTRACT)

    # Esquisse5 → Enlèv. mat.-Extru.5 (cut, through all)
    with BuildSketch(Plane(origin=(0, 1, 0), x_dir=(1, 0, 0), z_dir=(0, 1, 0))):
        with Locations((-36.905449133, 14.9)):
            Circle(ESQUISSE5_R)
        with Locations((-36.905449133, -15.1)):
            Circle(ESQUISSE5_R)
    extrude(amount=-ENL_V_MAT_EXTRU_5_DEPTH, mode=Mode.SUBTRACT)

    # Esquisse6 → Enlèv. mat.-Extru.6 (cut, through all)
    with BuildSketch(Plane(origin=(0, 1, 0), x_dir=(1, 0, 0), z_dir=(0, 1, 0))):
        with Locations((-34.315449133, 0)):
            Rectangle(ESQUISSE6_W, ESQUISSE6_H)
    extrude(amount=-ENL_V_MAT_EXTRU_6_DEPTH, mode=Mode.SUBTRACT)

    # Congé1
    cong_1_edges = [part_1.edges().sort_by_distance(p)[0] for p in [
        (-40.815449133, -1.614859029, -9),
        (-40.815449133, -1.614859029, 9),
    ]]
    fillet(cong_1_edges, radius=CONG_1_R)

    # Congé2
    cong_2_edges = [part_1.edges().sort_by_distance(p)[0] for p in [
        (-33.815449133, 1, -9),
        (-40.522555914, 1, -8.707106781),
        (-33.815449133, 1, 9),
        (-40.522555914, 1, 8.707106781),
        (-40.815449133, 1, 0),
    ]]
    fillet(cong_2_edges, radius=CONG_2_R)


solid = part_1.part
